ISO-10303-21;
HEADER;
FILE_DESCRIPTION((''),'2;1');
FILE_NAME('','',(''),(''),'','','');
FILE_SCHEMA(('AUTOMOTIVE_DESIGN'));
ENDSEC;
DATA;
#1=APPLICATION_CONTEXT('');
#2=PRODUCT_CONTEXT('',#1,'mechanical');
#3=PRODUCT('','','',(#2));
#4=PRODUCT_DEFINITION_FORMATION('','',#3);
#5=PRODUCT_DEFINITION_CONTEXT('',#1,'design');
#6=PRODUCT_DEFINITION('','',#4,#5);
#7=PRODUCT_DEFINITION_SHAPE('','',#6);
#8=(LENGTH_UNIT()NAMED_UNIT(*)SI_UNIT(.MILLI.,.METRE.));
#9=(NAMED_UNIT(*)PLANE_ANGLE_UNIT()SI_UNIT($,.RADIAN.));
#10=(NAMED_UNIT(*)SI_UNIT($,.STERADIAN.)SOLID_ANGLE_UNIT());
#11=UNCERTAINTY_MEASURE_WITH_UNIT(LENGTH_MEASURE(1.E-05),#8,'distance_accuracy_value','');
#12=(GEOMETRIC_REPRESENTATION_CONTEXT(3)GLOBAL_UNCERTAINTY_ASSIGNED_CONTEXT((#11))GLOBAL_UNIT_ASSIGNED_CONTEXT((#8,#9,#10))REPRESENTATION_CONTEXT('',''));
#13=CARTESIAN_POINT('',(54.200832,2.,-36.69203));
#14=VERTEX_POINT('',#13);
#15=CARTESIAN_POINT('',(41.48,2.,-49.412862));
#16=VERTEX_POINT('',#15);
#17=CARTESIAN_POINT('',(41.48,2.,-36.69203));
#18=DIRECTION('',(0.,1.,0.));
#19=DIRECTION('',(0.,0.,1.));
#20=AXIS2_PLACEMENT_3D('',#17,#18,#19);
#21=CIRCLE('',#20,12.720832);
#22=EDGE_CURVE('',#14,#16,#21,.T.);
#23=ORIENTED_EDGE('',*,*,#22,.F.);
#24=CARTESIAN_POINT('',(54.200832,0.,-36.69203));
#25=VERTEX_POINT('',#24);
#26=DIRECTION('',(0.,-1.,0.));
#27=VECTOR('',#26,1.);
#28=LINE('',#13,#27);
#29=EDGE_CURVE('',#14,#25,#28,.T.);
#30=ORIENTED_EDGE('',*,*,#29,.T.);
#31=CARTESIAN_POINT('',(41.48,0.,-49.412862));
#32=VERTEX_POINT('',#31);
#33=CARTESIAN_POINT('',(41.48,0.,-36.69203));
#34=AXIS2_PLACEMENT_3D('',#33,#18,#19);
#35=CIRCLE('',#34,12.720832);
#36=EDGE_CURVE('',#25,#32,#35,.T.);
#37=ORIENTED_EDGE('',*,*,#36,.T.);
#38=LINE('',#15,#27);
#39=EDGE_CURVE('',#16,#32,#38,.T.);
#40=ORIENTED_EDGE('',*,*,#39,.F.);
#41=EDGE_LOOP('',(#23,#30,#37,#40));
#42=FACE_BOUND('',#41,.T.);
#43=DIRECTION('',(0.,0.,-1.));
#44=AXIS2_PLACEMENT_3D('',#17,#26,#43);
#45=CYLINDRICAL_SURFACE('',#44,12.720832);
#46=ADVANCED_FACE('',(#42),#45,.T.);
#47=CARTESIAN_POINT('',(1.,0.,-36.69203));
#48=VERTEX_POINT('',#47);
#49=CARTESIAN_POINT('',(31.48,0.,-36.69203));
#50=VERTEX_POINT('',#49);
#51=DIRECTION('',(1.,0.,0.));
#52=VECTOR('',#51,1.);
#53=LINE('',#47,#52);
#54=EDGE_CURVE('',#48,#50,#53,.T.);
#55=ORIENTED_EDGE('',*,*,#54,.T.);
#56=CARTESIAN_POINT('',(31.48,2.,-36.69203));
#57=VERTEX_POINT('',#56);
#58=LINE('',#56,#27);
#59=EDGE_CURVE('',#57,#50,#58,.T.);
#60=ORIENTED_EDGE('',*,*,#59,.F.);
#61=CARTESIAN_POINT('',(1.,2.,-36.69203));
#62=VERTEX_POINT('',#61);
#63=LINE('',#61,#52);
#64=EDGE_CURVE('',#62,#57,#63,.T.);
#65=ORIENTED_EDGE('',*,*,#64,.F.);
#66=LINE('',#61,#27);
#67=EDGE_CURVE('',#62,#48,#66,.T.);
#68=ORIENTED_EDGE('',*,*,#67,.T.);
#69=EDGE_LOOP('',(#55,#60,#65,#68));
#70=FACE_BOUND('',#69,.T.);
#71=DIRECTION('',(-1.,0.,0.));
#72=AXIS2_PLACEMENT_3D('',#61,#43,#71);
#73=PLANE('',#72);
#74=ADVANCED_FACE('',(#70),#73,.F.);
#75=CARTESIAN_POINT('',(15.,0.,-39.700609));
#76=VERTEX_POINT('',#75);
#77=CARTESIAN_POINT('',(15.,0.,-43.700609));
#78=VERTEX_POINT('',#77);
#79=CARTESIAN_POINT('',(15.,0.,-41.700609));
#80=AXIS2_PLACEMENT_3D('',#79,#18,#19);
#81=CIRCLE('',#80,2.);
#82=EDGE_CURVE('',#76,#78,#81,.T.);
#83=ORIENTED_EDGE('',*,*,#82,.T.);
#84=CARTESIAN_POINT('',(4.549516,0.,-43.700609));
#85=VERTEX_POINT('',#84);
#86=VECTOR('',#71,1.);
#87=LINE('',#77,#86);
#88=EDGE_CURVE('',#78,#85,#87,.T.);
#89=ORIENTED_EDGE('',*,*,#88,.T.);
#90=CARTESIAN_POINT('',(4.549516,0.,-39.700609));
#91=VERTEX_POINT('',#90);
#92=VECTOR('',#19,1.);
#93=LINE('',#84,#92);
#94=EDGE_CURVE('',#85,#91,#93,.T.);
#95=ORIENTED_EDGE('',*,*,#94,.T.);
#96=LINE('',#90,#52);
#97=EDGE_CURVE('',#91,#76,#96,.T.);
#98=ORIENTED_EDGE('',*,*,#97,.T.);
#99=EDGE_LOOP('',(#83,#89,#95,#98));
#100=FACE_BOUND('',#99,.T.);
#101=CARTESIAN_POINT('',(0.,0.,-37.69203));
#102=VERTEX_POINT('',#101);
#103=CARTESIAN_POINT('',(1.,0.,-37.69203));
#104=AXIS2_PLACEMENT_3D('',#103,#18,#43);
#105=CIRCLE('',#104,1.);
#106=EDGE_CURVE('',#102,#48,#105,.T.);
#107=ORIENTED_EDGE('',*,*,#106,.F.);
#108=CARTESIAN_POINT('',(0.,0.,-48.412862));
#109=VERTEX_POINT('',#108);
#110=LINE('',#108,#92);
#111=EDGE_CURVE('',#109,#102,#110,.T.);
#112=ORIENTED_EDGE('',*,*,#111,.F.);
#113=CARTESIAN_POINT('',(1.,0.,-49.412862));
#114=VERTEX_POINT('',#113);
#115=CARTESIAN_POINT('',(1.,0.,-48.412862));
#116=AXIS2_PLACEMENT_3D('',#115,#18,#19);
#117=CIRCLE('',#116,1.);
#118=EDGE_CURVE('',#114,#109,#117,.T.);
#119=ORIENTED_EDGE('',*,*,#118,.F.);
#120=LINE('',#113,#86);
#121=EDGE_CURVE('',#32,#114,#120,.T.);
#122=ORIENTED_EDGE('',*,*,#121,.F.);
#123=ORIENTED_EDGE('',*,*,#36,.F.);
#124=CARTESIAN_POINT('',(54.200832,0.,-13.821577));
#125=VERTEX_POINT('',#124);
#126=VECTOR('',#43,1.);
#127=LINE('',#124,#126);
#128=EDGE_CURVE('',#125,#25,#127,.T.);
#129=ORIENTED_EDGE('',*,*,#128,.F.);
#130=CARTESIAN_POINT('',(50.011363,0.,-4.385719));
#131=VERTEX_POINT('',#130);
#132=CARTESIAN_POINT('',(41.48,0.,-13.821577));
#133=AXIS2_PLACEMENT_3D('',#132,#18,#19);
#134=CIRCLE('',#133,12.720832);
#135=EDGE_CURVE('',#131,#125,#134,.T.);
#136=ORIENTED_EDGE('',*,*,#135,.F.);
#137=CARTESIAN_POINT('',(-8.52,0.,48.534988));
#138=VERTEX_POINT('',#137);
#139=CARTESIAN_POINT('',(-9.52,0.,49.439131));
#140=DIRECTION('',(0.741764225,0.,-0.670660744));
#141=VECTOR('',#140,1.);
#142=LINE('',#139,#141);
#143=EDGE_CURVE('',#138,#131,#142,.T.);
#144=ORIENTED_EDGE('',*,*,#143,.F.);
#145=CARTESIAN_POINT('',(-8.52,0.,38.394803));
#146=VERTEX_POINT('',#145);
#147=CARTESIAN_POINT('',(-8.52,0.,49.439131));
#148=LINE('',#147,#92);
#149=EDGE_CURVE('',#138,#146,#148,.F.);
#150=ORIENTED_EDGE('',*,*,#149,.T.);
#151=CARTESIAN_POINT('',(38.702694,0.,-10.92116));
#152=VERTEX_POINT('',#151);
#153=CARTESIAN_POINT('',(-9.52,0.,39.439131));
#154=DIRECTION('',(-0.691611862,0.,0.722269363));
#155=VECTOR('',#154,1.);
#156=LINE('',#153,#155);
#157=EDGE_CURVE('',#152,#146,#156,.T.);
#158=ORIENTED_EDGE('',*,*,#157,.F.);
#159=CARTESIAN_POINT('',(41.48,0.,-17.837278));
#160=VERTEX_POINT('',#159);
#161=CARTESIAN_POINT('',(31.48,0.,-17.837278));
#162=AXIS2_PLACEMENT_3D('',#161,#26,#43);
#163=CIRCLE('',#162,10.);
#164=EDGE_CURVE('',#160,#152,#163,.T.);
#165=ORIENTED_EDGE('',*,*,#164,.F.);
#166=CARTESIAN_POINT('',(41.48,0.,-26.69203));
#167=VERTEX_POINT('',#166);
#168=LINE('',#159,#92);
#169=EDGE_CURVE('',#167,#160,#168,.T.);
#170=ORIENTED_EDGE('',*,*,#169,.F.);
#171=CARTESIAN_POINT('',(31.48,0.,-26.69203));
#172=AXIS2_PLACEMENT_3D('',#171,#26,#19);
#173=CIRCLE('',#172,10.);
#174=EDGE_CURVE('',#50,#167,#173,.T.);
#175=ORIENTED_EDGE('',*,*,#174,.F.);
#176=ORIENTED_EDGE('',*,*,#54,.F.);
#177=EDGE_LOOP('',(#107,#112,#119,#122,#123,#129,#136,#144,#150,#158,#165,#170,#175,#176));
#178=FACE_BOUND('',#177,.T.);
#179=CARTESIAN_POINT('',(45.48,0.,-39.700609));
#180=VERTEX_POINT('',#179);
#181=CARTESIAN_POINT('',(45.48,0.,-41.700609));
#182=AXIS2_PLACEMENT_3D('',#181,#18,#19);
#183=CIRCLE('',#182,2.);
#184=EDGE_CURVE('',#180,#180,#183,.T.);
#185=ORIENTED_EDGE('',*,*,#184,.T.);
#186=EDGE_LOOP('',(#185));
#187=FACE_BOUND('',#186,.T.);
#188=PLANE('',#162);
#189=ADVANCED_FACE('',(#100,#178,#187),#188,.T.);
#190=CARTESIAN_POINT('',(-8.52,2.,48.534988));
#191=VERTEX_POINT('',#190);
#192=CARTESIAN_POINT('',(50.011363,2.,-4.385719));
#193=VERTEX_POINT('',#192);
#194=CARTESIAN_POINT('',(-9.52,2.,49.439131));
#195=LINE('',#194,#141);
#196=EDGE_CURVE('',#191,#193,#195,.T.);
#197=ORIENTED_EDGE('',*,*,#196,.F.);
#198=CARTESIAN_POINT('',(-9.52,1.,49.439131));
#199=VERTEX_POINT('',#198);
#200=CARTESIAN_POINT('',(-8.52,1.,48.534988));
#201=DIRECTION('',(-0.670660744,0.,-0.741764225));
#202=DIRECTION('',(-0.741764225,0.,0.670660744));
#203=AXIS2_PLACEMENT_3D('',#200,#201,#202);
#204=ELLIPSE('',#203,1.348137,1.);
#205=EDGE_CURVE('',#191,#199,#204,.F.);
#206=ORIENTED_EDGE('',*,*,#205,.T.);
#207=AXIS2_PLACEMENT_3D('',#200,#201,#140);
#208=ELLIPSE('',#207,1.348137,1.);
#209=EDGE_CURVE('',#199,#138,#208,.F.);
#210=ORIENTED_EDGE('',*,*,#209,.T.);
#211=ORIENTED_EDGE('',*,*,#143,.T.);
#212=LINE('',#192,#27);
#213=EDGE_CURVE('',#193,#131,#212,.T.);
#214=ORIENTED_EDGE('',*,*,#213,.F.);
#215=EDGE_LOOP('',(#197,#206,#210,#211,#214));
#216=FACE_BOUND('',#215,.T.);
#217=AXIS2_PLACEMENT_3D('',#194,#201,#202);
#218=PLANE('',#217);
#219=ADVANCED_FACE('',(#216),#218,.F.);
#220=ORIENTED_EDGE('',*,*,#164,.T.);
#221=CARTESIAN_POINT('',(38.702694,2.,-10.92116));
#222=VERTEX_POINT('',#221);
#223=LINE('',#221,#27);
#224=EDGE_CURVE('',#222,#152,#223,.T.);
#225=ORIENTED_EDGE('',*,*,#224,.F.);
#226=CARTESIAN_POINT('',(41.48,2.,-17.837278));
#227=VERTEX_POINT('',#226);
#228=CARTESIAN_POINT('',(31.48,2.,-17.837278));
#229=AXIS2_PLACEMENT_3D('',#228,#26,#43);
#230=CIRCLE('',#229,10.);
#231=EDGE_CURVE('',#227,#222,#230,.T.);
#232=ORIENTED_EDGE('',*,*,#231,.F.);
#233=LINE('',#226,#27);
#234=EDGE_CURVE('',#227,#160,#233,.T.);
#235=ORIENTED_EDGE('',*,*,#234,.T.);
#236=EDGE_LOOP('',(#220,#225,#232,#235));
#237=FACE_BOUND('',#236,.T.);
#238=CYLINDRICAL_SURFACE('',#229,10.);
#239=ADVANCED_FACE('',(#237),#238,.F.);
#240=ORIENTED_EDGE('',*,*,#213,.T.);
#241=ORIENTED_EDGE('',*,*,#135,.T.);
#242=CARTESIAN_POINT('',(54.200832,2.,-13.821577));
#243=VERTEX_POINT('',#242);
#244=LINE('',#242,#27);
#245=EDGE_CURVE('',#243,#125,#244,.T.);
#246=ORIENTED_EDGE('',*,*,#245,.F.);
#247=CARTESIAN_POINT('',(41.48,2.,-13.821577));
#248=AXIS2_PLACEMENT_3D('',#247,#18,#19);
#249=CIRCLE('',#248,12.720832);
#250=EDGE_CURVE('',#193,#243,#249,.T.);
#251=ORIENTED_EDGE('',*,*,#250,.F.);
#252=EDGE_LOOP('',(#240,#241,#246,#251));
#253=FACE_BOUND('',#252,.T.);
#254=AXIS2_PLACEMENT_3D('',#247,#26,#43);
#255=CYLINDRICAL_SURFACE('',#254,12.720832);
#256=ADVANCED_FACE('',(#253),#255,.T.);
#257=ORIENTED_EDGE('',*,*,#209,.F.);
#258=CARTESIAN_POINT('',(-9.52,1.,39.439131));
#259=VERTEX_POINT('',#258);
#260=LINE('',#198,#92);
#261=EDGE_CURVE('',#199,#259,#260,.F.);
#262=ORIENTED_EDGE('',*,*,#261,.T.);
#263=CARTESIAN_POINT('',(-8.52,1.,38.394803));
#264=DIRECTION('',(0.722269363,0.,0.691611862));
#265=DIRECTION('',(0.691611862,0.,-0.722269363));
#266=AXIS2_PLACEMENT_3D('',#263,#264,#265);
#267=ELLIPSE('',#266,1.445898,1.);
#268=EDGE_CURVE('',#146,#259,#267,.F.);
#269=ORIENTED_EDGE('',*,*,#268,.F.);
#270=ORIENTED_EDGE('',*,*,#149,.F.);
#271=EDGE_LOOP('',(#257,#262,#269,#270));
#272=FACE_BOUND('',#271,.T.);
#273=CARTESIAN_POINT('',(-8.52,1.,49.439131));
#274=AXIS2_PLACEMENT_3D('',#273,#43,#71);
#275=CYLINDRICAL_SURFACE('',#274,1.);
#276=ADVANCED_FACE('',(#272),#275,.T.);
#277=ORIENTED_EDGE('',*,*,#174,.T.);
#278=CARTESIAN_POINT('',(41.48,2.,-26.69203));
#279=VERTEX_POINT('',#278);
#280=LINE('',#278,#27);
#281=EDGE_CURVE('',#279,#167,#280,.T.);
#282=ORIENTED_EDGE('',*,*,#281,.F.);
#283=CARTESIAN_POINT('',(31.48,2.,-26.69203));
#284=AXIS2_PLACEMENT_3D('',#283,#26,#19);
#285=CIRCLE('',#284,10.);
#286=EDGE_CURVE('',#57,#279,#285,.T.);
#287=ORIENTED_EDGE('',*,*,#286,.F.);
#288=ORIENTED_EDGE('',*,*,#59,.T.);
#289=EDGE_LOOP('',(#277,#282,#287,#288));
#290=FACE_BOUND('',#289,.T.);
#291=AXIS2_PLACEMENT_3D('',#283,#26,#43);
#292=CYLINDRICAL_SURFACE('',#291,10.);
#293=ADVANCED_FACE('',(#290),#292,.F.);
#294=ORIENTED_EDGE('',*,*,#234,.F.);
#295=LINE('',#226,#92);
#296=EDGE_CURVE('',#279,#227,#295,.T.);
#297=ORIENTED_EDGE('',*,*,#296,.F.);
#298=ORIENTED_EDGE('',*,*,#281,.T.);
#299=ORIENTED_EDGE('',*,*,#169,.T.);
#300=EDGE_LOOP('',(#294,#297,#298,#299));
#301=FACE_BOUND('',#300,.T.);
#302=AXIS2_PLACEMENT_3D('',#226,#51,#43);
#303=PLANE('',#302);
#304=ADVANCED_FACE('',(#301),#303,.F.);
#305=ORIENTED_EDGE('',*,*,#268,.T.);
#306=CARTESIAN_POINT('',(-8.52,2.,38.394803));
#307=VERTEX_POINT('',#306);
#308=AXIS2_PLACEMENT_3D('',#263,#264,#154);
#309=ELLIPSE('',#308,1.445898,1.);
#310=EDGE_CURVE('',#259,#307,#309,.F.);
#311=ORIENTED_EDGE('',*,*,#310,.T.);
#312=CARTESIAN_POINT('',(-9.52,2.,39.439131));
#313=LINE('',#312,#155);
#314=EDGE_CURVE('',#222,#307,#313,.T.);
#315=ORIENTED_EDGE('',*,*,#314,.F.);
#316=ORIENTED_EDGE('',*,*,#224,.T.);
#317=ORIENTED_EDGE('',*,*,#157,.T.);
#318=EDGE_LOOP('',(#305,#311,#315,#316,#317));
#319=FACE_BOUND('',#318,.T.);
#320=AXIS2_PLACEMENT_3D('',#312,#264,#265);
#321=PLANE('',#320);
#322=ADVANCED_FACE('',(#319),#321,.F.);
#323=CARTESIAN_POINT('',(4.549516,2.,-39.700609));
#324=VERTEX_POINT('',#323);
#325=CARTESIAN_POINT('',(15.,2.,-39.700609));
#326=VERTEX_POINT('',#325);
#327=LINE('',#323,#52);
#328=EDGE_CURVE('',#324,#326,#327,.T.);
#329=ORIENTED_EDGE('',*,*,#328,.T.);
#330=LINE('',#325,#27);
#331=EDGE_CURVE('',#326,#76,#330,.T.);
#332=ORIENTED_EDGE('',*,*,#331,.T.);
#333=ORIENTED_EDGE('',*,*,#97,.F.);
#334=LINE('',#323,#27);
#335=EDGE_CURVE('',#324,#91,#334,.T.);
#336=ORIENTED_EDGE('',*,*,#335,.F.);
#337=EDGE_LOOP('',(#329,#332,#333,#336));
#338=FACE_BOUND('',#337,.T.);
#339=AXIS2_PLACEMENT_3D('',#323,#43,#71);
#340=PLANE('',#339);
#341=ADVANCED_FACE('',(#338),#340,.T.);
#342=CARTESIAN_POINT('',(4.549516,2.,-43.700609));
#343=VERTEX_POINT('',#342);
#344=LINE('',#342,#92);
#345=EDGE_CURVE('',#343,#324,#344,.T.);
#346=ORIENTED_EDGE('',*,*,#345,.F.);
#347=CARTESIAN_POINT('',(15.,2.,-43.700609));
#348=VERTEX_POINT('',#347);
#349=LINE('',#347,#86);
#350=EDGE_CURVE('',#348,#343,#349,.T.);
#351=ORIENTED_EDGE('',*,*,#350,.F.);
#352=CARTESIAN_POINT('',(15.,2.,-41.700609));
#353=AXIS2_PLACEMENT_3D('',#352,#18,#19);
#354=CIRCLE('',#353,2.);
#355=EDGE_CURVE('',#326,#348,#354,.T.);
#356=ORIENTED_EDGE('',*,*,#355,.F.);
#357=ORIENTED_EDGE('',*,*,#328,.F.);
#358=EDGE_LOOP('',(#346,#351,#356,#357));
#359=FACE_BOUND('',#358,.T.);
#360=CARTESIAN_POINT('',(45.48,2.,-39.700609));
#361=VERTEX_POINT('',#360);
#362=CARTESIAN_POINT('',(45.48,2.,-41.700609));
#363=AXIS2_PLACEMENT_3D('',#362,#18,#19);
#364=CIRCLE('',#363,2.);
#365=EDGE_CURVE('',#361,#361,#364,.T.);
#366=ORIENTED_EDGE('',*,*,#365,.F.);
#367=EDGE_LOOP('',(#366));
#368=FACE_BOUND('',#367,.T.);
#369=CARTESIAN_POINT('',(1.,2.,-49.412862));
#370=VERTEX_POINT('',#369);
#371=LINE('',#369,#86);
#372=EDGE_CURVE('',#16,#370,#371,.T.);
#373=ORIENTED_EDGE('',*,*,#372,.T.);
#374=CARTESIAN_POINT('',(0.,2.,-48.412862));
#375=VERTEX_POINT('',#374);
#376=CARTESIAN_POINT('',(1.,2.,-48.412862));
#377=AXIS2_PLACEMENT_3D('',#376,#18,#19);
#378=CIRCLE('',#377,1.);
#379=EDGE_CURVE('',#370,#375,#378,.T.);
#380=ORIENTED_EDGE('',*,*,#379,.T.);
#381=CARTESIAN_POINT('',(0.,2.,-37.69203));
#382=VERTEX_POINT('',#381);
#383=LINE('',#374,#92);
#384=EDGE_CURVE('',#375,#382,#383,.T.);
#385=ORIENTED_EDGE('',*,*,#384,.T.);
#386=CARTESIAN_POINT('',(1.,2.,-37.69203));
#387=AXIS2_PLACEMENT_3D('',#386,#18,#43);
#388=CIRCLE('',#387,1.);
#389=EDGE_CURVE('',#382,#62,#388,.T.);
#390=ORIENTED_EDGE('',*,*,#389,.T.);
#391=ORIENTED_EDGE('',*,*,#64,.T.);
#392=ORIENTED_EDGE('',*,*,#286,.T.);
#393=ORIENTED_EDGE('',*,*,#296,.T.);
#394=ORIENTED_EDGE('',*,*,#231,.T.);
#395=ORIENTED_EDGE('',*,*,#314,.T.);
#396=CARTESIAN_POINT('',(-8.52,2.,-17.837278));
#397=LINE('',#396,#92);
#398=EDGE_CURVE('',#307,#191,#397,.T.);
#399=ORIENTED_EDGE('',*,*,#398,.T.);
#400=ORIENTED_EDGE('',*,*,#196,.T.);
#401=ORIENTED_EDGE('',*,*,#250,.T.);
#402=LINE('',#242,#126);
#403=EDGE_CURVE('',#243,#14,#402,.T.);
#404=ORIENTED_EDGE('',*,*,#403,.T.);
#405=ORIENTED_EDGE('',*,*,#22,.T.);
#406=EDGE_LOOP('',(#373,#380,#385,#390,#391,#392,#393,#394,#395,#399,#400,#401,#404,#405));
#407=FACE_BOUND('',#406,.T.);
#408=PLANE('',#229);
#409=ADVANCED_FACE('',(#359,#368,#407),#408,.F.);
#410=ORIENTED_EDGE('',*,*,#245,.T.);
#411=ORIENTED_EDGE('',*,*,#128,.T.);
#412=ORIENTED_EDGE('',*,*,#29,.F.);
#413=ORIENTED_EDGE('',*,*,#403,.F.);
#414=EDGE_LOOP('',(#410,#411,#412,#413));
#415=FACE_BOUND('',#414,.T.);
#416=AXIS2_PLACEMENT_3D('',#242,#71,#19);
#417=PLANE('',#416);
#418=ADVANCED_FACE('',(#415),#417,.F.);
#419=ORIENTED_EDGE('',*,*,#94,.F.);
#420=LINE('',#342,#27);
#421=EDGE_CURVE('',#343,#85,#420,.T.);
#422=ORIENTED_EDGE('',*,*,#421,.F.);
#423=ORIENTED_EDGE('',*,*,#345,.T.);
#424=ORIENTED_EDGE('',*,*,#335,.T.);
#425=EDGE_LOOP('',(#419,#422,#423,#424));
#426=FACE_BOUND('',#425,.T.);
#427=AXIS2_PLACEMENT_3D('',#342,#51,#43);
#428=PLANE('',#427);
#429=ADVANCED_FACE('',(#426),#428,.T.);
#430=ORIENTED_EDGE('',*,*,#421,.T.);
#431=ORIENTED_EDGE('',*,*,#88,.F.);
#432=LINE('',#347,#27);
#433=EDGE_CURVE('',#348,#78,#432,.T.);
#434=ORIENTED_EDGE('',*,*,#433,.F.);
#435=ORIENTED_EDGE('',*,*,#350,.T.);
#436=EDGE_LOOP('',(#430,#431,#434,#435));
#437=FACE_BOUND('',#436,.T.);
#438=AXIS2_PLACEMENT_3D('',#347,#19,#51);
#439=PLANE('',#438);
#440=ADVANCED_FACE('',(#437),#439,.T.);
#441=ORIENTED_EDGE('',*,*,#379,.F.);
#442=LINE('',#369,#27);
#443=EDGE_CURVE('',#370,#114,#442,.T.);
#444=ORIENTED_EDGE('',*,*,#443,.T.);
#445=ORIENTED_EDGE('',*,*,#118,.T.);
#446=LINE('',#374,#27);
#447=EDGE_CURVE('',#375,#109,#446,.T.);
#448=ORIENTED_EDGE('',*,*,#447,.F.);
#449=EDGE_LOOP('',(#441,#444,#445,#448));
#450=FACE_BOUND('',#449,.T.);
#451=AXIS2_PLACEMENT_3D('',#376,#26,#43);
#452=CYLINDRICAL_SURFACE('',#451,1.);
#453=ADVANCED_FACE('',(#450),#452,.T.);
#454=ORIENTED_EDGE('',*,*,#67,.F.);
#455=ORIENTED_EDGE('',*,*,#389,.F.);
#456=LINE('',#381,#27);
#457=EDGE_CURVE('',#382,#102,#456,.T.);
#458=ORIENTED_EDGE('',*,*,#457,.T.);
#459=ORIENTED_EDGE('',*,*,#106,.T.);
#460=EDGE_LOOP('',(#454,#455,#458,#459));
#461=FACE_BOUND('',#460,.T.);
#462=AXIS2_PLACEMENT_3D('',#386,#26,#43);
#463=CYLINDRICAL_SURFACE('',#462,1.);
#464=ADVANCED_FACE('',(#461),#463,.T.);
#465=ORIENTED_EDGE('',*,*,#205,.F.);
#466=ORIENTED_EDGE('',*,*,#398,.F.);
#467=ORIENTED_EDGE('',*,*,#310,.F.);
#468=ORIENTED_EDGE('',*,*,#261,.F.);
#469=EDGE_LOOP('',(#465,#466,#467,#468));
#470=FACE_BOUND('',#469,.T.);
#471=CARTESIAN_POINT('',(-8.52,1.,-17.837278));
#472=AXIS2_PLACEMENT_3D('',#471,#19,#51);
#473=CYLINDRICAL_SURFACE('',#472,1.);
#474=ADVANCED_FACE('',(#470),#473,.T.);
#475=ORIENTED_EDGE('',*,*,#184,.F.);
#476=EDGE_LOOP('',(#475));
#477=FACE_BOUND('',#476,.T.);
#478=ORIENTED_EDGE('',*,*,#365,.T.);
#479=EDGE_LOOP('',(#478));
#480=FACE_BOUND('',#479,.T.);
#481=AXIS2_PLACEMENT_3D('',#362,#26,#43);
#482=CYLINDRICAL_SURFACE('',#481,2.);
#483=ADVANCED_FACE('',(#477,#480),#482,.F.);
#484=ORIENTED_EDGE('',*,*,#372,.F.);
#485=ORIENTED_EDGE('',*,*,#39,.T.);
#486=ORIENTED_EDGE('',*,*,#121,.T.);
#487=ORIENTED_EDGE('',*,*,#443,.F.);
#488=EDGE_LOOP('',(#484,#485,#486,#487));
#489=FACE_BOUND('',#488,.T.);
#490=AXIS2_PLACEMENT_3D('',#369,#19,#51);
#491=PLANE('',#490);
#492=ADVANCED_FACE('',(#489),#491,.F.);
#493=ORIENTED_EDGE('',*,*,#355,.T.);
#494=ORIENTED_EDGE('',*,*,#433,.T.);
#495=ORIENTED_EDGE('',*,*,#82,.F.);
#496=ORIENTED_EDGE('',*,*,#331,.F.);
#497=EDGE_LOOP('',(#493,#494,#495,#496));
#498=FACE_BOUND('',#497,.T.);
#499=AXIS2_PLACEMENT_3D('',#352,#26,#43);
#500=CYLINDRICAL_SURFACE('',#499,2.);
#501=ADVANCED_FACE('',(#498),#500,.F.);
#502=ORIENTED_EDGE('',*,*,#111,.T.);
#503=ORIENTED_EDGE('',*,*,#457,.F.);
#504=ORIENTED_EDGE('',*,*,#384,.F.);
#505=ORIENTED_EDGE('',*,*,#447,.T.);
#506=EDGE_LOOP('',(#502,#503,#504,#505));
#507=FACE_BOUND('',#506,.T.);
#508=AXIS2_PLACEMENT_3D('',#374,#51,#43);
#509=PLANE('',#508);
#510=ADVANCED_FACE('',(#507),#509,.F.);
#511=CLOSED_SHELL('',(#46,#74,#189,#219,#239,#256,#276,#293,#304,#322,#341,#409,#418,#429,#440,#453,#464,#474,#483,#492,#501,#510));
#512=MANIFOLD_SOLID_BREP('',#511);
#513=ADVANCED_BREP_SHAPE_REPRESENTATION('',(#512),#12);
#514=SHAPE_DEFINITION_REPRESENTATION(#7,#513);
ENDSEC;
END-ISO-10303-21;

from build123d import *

# Parameters (mm, degrees)
SKETCH1_R           = 2
BOSS_EXTRUDE2_DEPTH = 2
FILLET1_R           = 1
FILLET2_R           = 1


with BuildPart() as part:
    # Sketch1 → Boss-Extrude2 (new body)
    with BuildSketch(Plane(origin=(0, 0, 0), x_dir=(1, 0, 0), z_dir=(0, 1, 0))):
        with BuildLine():
            Line((0, 48.412862342), (0, 37.692030173))
            ThreePointArc((0, 37.692030173), (0.292893219, 36.984923392), (1, 36.692030173))
            Line((1, 36.692030173), (31.48, 36.692030173))
            ThreePointArc((31.48, 36.692030173), (38.551067812, 33.763097985), (41.48, 26.692030173))
            Line((41.48, 26.692030173), (41.48, 17.837278162))
            ThreePointArc((41.48, 17.837278162), (40.75973427, 14.11081444), (38.702693625, 10.92115954))
            Line((38.702693625, 10.92115954), (-9.52, -39.4391308))
            Line((-9.52, -39.4391308), (-9.52, -49.4391308))
            Line((-9.52, -49.4391308), (50.011362769, 4.385719046))
            ThreePointArc((50.011362769, 4.385719046), (53.106383896, 8.659526457), (54.200832168, 13.821577266))
            Line((54.200832168, 13.821577266), (54.200832168, 36.692030173))
            ThreePointArc((54.200832168, 36.692030173), (50.474986688, 45.687016862), (41.48, 49.412862342))
            Line((41.48, 49.412862342), (1, 49.412862342))
            ThreePointArc((1, 49.412862342), (0.292893219, 49.119969123), (0, 48.412862342))
        make_face()
        with Locations(Location((45.48, 41.700609081, 0), (0, 0, 270))):
            Circle(SKETCH1_R, mode=Mode.SUBTRACT)
        with BuildLine():
            Line((15, 43.700609081), (4.549516448, 43.700609081))
            Line((4.549516448, 43.700609081), (4.549516448, 39.700609081))
            Line((4.549516448, 39.700609081), (15, 39.700609081))
            ThreePointArc((15, 39.700609081), (17, 41.700609081), (15, 43.700609081))
        make_face(mode=Mode.SUBTRACT)
    extrude(amount=BOSS_EXTRUDE2_DEPTH)

    # Fillet1
    fillet1_edges = [part.edges().sort_by_distance(p)[0] for p in [
        (-9.52, 2, 44.4391308),
    ]]
    fillet(fillet1_edges, radius=FILLET1_R)

    # Fillet2
    fillet2_edges = [part.edges().sort_by_distance(p)[0] for p in [
        (-9.52, 0, 44.4391308),
    ]]
    fillet(fillet2_edges, radius=FILLET2_R - 0.0001)  # a hair under: the kernel refuses the full size


solid = part.part
